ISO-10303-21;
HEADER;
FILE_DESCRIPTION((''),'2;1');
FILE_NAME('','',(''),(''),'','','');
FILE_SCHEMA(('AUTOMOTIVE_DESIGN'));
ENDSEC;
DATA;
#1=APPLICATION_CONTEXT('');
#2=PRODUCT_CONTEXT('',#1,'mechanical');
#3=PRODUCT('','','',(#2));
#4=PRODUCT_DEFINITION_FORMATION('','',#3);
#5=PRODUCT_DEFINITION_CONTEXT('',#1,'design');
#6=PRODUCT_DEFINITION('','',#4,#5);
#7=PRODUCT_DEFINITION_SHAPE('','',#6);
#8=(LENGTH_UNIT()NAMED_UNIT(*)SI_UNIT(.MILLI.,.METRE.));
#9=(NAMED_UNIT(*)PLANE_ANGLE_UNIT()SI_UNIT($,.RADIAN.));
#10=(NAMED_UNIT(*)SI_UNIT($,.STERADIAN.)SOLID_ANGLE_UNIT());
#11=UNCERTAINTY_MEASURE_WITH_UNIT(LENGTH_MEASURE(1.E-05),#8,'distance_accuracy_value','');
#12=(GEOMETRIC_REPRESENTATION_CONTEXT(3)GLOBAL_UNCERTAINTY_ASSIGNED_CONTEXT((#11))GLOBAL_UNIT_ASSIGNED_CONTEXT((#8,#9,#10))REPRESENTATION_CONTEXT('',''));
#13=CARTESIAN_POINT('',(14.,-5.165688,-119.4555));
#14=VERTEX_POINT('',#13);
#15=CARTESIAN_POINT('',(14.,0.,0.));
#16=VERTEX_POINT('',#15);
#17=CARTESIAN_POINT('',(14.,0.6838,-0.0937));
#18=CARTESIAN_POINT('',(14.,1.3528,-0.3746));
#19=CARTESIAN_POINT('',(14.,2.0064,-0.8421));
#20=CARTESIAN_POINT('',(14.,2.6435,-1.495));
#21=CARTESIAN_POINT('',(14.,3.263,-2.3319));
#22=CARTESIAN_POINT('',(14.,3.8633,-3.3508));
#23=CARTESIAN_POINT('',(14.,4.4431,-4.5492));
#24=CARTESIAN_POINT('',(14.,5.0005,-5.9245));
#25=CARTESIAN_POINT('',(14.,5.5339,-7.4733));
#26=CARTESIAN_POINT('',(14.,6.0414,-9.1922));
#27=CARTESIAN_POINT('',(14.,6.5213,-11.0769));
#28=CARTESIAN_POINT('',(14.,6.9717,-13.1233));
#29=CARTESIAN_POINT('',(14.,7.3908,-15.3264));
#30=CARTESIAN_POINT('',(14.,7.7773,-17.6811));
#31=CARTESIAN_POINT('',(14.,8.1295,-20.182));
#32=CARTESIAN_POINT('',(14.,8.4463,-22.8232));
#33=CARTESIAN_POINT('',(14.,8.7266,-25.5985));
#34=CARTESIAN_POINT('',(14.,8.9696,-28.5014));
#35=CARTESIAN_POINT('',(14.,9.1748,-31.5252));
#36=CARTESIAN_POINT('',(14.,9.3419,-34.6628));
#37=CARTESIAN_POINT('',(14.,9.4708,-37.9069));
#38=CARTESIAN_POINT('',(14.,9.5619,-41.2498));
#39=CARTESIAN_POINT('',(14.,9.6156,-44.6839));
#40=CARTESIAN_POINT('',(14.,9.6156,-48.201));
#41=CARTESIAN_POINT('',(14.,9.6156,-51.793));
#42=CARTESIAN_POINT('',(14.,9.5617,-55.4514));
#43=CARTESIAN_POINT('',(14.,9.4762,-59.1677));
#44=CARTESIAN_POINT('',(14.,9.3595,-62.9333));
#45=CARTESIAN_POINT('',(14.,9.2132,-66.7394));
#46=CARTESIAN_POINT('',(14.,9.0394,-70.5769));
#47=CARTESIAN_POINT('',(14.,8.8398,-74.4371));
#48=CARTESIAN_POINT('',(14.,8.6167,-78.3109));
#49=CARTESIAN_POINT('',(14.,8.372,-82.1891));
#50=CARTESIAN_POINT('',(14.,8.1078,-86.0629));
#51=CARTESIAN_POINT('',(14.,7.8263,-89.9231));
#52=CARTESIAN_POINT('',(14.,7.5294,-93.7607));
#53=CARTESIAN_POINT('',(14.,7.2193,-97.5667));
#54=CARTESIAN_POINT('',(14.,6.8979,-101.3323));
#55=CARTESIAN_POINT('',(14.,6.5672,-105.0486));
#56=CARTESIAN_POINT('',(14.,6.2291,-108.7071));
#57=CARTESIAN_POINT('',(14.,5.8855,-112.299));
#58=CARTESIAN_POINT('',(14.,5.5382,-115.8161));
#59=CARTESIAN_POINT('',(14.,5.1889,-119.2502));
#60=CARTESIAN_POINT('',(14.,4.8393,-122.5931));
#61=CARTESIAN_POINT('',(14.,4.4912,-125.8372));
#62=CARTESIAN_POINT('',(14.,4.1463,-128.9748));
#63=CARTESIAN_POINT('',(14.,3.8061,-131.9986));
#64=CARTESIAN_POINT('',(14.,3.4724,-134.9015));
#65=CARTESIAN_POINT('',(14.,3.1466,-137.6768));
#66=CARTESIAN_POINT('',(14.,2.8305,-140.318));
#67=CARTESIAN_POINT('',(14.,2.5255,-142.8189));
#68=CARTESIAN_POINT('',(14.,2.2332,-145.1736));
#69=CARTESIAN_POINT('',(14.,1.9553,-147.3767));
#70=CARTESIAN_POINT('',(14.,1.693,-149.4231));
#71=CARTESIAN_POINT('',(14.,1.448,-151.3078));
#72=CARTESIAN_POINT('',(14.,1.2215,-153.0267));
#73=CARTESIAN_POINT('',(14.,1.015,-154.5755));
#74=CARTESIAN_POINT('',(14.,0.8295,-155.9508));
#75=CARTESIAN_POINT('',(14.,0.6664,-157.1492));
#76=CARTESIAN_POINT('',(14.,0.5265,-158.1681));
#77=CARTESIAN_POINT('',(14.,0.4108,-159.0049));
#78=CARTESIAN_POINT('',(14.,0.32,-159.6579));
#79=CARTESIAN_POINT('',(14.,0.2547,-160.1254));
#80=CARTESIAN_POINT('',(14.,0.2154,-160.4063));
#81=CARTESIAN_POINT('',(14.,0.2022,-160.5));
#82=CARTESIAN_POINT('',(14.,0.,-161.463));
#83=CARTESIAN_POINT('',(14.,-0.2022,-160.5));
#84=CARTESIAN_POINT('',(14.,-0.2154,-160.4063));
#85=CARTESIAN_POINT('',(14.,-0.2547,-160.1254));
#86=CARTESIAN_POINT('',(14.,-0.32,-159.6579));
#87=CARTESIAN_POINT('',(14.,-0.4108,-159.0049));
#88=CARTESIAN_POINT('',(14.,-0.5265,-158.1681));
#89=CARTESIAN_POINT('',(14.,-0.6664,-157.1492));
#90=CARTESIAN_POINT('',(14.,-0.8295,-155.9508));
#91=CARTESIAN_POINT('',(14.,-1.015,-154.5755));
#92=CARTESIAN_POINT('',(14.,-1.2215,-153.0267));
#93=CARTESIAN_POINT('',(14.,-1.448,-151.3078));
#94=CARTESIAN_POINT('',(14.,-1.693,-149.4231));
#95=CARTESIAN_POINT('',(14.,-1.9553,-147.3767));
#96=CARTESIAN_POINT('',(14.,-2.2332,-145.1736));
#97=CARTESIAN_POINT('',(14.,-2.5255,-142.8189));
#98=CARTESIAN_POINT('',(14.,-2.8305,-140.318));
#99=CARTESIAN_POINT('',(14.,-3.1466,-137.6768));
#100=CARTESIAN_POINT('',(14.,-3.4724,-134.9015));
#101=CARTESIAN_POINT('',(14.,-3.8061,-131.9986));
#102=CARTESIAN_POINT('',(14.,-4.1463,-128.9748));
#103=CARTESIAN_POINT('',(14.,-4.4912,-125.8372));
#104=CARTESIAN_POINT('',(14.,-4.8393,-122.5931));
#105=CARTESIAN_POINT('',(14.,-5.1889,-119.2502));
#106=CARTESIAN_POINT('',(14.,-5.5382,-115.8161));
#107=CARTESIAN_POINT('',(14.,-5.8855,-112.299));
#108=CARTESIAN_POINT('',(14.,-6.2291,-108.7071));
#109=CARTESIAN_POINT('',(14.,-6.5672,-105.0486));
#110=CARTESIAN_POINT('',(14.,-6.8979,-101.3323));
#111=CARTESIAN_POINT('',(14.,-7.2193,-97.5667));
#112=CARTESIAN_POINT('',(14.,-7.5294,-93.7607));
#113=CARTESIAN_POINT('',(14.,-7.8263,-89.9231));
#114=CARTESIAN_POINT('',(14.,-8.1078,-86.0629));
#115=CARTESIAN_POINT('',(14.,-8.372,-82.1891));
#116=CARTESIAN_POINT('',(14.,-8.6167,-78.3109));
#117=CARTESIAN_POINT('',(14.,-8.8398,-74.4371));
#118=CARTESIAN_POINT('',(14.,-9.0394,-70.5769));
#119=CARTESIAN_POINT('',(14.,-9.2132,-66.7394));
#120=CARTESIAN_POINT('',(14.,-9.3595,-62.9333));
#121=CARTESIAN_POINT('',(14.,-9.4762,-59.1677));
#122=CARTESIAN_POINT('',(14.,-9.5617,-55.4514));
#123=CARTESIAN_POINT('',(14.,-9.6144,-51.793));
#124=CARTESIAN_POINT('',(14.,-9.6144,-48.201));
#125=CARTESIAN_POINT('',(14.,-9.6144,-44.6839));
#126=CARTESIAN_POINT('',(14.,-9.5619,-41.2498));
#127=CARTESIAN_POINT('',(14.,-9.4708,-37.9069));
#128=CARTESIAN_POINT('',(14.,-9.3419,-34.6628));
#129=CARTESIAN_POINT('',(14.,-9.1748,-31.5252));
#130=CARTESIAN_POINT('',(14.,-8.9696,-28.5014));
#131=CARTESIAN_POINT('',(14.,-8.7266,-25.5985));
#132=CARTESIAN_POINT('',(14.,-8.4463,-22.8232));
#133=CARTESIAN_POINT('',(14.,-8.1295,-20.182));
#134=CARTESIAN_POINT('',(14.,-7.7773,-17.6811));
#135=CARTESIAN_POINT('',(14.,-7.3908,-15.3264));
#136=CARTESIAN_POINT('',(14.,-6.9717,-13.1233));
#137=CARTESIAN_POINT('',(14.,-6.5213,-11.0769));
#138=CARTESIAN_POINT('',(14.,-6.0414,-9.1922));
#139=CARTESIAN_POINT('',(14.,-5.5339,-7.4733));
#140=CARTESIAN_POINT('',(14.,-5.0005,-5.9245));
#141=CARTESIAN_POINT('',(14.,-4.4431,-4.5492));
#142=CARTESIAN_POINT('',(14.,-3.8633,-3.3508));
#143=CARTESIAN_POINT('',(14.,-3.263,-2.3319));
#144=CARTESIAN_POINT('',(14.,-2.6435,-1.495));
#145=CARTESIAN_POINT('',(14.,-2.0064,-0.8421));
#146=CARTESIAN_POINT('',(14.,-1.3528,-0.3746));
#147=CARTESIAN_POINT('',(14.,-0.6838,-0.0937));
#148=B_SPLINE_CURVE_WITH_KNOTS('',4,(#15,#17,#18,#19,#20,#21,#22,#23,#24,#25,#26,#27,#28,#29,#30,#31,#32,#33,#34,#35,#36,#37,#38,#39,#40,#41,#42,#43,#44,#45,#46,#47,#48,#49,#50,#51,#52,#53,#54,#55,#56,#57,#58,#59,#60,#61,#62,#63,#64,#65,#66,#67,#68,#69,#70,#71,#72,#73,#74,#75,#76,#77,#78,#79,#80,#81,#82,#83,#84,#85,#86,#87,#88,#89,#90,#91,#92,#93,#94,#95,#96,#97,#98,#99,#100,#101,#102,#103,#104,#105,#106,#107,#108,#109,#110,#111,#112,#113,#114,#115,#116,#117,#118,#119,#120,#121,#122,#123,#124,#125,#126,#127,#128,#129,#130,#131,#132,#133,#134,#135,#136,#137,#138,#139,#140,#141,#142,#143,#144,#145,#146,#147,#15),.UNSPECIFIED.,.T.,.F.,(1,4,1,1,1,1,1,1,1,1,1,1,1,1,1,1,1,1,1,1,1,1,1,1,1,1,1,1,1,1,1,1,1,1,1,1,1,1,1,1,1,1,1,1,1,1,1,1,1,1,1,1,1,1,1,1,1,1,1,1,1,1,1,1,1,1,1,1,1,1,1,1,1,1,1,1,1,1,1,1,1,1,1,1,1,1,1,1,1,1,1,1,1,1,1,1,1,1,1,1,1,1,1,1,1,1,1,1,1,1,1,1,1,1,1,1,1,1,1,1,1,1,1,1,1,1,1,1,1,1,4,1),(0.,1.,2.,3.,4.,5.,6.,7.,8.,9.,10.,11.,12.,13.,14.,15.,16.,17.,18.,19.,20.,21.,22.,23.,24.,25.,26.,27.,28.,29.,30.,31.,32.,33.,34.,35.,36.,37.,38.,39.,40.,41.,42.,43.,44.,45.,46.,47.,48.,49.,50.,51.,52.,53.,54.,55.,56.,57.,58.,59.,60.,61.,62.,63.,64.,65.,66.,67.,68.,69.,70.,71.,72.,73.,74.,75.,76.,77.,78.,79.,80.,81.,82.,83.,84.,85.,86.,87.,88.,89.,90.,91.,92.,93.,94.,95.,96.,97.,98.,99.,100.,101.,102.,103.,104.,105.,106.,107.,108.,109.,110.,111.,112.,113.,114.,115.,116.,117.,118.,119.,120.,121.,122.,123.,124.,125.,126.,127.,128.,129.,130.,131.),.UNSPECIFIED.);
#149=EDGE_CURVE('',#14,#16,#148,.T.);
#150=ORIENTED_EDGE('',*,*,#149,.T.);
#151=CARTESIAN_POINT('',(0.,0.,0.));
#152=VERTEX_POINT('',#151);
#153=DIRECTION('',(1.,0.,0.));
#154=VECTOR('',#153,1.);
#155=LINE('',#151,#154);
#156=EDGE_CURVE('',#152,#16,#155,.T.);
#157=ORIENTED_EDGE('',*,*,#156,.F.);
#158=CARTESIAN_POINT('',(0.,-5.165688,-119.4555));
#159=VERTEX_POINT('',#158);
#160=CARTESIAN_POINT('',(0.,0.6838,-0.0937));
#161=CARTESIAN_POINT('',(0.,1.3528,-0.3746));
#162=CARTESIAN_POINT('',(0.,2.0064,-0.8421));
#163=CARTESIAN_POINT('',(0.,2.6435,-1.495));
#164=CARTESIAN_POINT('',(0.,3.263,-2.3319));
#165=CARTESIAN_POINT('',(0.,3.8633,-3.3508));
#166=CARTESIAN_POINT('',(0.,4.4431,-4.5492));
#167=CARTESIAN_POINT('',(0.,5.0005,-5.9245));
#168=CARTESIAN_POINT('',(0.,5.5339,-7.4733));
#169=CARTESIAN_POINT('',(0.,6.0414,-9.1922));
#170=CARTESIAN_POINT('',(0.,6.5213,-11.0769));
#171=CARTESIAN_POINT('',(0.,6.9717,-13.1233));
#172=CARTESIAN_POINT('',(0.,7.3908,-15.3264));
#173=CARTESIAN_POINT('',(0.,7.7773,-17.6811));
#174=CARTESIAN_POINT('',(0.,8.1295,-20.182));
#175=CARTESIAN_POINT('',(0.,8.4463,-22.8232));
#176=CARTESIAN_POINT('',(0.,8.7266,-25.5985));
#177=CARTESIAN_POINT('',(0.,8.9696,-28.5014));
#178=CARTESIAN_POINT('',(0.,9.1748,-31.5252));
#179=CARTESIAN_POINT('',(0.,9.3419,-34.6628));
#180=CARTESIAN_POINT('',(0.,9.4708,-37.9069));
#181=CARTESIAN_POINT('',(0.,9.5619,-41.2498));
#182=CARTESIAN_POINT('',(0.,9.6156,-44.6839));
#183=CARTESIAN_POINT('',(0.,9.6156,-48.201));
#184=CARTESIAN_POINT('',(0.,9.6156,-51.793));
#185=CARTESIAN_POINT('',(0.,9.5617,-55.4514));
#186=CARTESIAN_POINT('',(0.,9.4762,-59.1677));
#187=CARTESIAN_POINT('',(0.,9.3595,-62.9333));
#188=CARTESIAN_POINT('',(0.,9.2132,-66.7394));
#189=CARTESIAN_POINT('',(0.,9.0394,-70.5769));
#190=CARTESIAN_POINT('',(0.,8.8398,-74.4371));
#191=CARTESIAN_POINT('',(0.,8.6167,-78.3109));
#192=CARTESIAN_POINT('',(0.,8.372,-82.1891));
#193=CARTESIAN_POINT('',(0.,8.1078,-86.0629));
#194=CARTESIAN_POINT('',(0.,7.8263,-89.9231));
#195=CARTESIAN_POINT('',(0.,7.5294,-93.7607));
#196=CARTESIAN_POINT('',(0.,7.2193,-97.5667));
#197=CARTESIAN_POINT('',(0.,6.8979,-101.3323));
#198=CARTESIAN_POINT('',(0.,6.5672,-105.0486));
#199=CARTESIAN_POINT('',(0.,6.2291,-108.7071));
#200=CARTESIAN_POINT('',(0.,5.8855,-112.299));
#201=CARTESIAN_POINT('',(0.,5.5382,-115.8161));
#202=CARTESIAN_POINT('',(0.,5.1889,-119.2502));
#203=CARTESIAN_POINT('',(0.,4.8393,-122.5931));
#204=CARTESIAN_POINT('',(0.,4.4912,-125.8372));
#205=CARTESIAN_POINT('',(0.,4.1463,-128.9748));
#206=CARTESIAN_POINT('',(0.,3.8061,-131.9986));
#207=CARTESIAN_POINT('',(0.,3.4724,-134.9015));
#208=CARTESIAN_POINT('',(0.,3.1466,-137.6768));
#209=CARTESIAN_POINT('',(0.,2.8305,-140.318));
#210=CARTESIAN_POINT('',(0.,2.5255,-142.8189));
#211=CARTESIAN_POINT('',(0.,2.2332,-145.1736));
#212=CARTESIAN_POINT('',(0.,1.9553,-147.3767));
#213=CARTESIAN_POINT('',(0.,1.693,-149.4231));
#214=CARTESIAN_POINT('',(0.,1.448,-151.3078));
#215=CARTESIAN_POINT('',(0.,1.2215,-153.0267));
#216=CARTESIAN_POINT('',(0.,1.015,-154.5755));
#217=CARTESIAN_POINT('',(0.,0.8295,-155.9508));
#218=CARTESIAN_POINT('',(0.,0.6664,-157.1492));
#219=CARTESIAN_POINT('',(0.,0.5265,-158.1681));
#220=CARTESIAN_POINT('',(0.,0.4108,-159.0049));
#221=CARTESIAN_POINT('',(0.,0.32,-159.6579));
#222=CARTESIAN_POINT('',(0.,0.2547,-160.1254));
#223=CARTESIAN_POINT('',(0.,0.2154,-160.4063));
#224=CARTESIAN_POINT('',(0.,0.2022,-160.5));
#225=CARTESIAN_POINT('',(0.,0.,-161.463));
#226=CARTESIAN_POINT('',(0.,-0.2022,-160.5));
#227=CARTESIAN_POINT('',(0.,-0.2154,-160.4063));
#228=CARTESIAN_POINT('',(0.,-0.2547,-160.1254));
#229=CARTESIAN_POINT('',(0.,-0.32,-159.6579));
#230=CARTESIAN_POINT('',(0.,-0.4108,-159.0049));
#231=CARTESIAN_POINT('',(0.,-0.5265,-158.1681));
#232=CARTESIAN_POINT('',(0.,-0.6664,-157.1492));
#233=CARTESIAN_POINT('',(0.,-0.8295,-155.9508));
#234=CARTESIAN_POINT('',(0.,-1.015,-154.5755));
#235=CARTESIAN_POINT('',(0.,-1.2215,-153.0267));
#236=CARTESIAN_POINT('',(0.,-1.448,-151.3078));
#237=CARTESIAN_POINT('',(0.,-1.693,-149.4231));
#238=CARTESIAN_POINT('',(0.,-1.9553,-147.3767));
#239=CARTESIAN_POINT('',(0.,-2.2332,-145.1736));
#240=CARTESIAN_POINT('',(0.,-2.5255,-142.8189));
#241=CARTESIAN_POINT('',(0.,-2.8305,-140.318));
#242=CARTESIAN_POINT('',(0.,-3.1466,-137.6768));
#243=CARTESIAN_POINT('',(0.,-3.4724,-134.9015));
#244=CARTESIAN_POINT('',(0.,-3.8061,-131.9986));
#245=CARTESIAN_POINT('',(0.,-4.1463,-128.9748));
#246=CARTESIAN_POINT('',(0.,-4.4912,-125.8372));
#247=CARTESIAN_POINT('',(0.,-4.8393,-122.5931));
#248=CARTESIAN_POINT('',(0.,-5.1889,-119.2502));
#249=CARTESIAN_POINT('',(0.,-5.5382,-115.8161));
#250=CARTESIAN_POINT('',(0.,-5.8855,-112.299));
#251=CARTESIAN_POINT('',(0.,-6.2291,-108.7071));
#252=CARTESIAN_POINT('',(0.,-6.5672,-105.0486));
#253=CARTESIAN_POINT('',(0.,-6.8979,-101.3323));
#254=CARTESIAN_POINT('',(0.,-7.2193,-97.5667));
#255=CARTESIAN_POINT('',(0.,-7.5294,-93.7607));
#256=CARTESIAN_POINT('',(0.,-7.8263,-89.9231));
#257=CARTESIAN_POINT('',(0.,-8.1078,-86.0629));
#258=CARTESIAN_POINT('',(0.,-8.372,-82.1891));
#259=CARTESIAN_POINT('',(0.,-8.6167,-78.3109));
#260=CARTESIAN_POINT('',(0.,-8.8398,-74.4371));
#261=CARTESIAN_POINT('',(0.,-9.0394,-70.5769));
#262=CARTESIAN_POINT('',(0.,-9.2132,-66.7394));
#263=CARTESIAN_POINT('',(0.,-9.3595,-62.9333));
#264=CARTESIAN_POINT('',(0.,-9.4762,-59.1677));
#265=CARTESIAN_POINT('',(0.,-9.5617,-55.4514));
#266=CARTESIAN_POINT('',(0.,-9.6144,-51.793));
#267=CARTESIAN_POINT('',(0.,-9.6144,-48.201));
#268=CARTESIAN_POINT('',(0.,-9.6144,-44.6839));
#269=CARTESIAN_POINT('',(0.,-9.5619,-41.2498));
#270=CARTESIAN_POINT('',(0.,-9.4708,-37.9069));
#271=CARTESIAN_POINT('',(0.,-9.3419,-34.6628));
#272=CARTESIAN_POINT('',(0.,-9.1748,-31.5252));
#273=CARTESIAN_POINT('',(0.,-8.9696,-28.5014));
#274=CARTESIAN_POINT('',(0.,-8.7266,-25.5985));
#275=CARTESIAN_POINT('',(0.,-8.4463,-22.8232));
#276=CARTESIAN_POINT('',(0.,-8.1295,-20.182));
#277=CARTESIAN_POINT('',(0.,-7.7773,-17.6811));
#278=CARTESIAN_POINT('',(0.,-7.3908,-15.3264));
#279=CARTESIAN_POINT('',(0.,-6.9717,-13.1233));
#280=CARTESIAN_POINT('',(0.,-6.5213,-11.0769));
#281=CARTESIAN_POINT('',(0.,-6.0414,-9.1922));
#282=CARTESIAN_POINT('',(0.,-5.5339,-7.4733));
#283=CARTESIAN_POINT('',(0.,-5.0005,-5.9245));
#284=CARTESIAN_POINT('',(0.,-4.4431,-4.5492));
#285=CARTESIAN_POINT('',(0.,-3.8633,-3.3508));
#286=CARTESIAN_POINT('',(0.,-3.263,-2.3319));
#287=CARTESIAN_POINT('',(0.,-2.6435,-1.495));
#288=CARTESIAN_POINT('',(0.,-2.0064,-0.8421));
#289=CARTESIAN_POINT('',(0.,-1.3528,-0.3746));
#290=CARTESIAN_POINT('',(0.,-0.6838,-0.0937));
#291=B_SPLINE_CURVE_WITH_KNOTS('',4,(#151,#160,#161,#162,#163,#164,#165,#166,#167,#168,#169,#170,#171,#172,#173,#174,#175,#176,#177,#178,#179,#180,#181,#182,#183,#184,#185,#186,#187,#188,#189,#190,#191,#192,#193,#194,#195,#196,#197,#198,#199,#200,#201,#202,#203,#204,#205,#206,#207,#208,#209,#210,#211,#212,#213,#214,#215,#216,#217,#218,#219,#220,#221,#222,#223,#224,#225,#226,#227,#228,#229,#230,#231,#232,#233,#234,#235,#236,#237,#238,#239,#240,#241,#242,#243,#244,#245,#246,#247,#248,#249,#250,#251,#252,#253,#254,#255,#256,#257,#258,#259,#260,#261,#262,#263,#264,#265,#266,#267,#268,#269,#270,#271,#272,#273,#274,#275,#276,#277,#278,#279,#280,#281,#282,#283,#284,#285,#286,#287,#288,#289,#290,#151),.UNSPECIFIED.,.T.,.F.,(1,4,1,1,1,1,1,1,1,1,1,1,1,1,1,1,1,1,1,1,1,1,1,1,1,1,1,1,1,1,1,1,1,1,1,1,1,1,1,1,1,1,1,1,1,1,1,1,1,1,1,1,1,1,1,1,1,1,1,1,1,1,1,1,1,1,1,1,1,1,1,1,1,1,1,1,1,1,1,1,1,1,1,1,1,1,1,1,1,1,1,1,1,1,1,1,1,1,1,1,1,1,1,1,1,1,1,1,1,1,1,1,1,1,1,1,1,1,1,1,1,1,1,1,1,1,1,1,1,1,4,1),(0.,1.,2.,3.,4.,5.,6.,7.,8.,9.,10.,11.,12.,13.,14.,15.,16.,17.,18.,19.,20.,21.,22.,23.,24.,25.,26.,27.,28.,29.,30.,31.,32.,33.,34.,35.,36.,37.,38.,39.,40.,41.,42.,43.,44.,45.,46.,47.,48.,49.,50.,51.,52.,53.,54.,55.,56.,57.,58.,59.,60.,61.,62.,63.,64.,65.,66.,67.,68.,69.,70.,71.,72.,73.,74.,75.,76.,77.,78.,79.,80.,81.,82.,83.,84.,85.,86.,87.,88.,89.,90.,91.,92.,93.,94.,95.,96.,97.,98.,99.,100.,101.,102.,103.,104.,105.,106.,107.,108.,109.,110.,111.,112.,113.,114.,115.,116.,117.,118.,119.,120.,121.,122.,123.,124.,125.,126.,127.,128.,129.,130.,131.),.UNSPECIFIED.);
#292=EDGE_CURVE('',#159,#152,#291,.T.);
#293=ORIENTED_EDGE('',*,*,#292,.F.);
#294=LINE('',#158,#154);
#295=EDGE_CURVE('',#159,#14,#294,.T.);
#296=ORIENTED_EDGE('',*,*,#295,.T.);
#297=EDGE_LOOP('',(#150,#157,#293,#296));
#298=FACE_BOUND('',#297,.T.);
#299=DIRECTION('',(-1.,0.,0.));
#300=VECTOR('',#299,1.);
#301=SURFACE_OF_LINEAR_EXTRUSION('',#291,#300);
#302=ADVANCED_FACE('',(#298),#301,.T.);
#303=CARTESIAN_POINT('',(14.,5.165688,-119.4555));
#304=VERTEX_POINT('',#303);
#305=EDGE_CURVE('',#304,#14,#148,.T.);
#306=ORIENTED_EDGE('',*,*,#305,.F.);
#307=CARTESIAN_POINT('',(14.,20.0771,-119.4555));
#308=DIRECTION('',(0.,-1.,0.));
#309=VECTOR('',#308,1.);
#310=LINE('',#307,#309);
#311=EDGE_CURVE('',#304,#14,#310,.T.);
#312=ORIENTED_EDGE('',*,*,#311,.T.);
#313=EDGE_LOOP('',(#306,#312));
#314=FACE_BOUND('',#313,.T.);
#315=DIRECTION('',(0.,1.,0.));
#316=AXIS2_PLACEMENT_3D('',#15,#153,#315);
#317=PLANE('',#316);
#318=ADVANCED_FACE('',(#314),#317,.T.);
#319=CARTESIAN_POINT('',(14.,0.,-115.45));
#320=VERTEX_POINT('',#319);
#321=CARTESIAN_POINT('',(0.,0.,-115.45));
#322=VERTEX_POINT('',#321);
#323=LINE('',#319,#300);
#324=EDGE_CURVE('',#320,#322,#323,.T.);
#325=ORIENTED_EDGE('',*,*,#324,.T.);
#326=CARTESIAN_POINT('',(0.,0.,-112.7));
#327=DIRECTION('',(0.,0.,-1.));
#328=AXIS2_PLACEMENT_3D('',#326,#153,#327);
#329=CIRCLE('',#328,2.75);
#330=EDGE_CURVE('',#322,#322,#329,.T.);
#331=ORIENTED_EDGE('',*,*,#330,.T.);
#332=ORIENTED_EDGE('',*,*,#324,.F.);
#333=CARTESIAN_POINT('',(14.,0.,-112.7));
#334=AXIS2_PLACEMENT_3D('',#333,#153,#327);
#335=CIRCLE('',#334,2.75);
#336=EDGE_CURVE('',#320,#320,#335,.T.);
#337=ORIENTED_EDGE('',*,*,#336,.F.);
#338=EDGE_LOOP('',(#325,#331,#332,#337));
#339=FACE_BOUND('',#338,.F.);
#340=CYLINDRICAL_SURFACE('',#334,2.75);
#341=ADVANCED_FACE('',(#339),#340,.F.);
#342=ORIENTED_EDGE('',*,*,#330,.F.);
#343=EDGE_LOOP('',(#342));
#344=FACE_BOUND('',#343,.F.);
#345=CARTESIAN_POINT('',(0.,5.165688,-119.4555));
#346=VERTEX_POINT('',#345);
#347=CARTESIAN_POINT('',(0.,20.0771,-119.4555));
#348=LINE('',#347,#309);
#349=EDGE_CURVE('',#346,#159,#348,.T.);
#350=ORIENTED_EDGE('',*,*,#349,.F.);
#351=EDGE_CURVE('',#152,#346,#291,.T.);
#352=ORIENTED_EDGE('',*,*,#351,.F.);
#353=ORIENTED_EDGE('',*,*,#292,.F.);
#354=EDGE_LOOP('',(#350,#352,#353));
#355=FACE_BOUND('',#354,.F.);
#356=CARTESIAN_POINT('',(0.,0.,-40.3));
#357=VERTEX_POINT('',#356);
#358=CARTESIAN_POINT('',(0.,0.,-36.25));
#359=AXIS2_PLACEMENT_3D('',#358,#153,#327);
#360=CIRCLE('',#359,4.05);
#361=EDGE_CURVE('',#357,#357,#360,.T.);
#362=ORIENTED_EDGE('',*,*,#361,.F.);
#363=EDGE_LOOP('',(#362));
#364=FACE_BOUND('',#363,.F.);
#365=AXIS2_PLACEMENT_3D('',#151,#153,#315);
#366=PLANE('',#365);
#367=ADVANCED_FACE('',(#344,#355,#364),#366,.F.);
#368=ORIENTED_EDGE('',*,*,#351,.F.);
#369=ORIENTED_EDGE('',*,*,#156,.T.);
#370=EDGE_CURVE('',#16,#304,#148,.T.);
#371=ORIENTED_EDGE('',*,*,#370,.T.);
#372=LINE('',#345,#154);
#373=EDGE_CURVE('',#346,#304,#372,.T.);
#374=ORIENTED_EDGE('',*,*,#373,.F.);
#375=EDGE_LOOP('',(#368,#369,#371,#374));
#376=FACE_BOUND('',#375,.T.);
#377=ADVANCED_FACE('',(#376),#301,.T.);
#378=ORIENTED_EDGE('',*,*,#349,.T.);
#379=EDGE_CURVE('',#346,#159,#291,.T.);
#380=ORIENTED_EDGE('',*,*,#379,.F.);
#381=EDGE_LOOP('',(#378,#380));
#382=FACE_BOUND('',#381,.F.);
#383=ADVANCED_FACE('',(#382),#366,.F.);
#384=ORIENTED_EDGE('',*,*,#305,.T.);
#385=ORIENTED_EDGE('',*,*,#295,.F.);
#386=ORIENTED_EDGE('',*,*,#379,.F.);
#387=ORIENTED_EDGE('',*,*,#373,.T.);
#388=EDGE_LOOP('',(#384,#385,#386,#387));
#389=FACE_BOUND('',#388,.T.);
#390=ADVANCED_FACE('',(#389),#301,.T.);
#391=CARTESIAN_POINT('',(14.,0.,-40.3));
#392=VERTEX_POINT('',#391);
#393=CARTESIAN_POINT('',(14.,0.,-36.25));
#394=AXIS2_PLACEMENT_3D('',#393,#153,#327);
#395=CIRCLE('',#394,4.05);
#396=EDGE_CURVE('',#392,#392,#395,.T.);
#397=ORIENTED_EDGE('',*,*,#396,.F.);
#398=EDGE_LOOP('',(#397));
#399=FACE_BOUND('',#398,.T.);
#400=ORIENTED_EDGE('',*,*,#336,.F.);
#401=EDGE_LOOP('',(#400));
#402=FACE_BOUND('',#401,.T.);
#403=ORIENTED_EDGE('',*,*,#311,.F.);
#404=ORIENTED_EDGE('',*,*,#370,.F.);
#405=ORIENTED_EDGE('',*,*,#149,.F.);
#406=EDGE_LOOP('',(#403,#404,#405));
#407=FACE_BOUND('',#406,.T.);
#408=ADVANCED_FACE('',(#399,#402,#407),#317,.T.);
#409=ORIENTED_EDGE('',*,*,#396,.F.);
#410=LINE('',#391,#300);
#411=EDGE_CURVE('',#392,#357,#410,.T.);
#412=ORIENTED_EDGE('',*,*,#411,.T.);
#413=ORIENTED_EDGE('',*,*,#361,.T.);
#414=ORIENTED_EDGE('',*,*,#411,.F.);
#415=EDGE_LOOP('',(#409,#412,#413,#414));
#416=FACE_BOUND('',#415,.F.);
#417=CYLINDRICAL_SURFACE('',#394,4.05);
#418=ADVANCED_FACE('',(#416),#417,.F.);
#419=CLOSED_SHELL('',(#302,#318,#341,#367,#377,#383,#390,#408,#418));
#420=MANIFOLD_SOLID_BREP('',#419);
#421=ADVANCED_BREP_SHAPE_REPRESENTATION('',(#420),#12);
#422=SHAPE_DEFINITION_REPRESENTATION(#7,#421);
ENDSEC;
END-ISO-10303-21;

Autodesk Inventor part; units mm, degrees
ref_plane "YZ Plane" through (0, 0, 0) normal (1, 0, 0) x (0, 1, 0)
ref_plane "XZ Plane" through (0, 0, 0) normal (0, 1, 0) x (-1, 0, 0)
ref_plane "XY Plane" through (0, 0, 0) normal (0, 0, 1) x (1, 0, 0)
sketch "Sketch9" plane through (0, 0, 0) normal (1, 0, 0) x (0, 1, 0)
  line L0 (0, 0) -> (0.6838, -0.0937) construction
  line L1 (0.6838, -0.0937) -> (1.3528, -0.3746) construction
  line L2 (1.3528, -0.3746) -> (2.0064, -0.8421) construction
  line L3 (2.0064, -0.8421) -> (2.6435, -1.495) construction
  line L4 (2.6435, -1.495) -> (3.263, -2.3319) construction
  line L5 (3.263, -2.3319) -> (3.8633, -3.3508) construction
  line L6 (3.8633, -3.3508) -> (4.4431, -4.5492) construction
  line L7 (4.4431, -4.5492) -> (5.0005, -5.9245) construction
  line L8 (5.0005, -5.9245) -> (5.5339, -7.4733) construction
  line L9 (5.5339, -7.4733) -> (6.0414, -9.1922) construction
  line L10 (6.0414, -9.1922) -> (6.5213, -11.0769) construction
  line L11 (6.5213, -11.0769) -> (6.9717, -13.1233) construction
  line L12 (6.9717, -13.1233) -> (7.3908, -15.3264) construction
  line L13 (7.3908, -15.3264) -> (7.7773, -17.6811) construction
  line L14 (7.7773, -17.6811) -> (8.1295, -20.182) construction
  line L15 (8.1295, -20.182) -> (8.4463, -22.8232) construction
  line L16 (8.4463, -22.8232) -> (8.7266, -25.5985) construction
  line L17 (8.7266, -25.5985) -> (8.9696, -28.5014) construction
  line L18 (8.9696, -28.5014) -> (9.1748, -31.5252) construction
  line L19 (9.1748, -31.5252) -> (9.3419, -34.6628) construction
  line L20 (9.3419, -34.6628) -> (9.4708, -37.9069) construction
  line L21 (9.4708, -37.9069) -> (9.5619, -41.2498) construction
  line L22 (9.5619, -41.2498) -> (9.6156, -44.6839) construction
  line L23 (9.6156, -44.6839) -> (9.6156, -48.201) construction
  line L24 (9.6156, -48.201) -> (9.6156, -51.793) construction
  line L25 (9.6156, -51.793) -> (9.5617, -55.4514) construction
  line L26 (9.5617, -55.4514) -> (9.4762, -59.1677) construction
  line L27 (9.4762, -59.1677) -> (9.3595, -62.9333) construction
  line L28 (9.3595, -62.9333) -> (9.2132, -66.7394) construction
  line L29 (9.2132, -66.7394) -> (9.0394, -70.5769) construction
  line L30 (9.0394, -70.5769) -> (8.8398, -74.4371) construction
  line L31 (8.8398, -74.4371) -> (8.6167, -78.3109) construction
  line L32 (8.6167, -78.3109) -> (8.372, -82.1891) construction
  line L33 (8.372, -82.1891) -> (8.1078, -86.0629) construction
  line L34 (8.1078, -86.0629) -> (7.8263, -89.9231) construction
  line L35 (7.8263, -89.9231) -> (7.5294, -93.7607) construction
  line L36 (7.5294, -93.7607) -> (7.2193, -97.5667) construction
  line L37 (7.2193, -97.5667) -> (6.8979, -101.3323) construction
  line L38 (6.8979, -101.3323) -> (6.5672, -105.0486) construction
  line L39 (6.5672, -105.0486) -> (6.2291, -108.7071) construction
  line L40 (6.2291, -108.7071) -> (5.8855, -112.299) construction
  line L41 (5.8855, -112.299) -> (5.5382, -115.8161) construction
  line L42 (5.5382, -115.8161) -> (5.1889, -119.2502) construction
  line L43 (5.1889, -119.2502) -> (4.8393, -122.5931) construction
  line L44 (4.8393, -122.5931) -> (4.4912, -125.8372) construction
  line L45 (4.4912, -125.8372) -> (4.1463, -128.9748) construction
  line L46 (4.1463, -128.9748) -> (3.8061, -131.9986) construction
  line L47 (3.8061, -131.9986) -> (3.4724, -134.9015) construction
  line L48 (3.4724, -134.9015) -> (3.1466, -137.6768) construction
  line L49 (3.1466, -137.6768) -> (2.8305, -140.318) construction
  line L50 (2.8305, -140.318) -> (2.5255, -142.8189) construction
  line L51 (2.5255, -142.8189) -> (2.2332, -145.1736) construction
  line L52 (2.2332, -145.1736) -> (1.9553, -147.3767) construction
  line L53 (1.9553, -147.3767) -> (1.693, -149.4231) construction
  line L54 (1.693, -149.4231) -> (1.448, -151.3078) construction
  line L55 (1.448, -151.3078) -> (1.2215, -153.0267) construction
  line L56 (1.2215, -153.0267) -> (1.015, -154.5755) construction
  line L57 (1.015, -154.5755) -> (0.8295, -155.9508) construction
  line L58 (0.8295, -155.9508) -> (0.6664, -157.1492) construction
  line L59 (0.6664, -157.1492) -> (0.5265, -158.1681) construction
  line L60 (0.5265, -158.1681) -> (0.4108, -159.0049) construction
  line L61 (0.4108, -159.0049) -> (0.32, -159.6579) construction
  line L62 (0.32, -159.6579) -> (0.2547, -160.1254) construction
  line L63 (0.2547, -160.1254) -> (0.2154, -160.4063) construction
  line L64 (0.2154, -160.4063) -> (0.2022, -160.5) construction
  line L65 (0.2022, -160.5) -> (0, -161.463) construction
  line L66 (0, -161.463) -> (-0.2022, -160.5) construction
  line L67 (-0.2022, -160.5) -> (-0.2154, -160.4063) construction
  line L68 (-0.2154, -160.4063) -> (-0.2547, -160.1254) construction
  line L69 (-0.2547, -160.1254) -> (-0.32, -159.6579) construction
  line L70 (-0.32, -159.6579) -> (-0.4108, -159.0049) construction
  line L71 (-0.4108, -159.0049) -> (-0.5265, -158.1681) construction
  line L72 (-0.5265, -158.1681) -> (-0.6664, -157.1492) construction
  line L73 (-0.6664, -157.1492) -> (-0.8295, -155.9508) construction
  line L74 (-0.8295, -155.9508) -> (-1.015, -154.5755) construction
  line L75 (-1.015, -154.5755) -> (-1.2215, -153.0267) construction
  line L76 (-1.2215, -153.0267) -> (-1.448, -151.3078) construction
  line L77 (-1.448, -151.3078) -> (-1.693, -149.4231) construction
  line L78 (-1.693, -149.4231) -> (-1.9553, -147.3767) construction
  line L79 (-1.9553, -147.3767) -> (-2.2332, -145.1736) construction
  line L80 (-2.2332, -145.1736) -> (-2.5255, -142.8189) construction
  line L81 (-2.5255, -142.8189) -> (-2.8305, -140.318) construction
  line L82 (-2.8305, -140.318) -> (-3.1466, -137.6768) construction
  line L83 (-3.1466, -137.6768) -> (-3.4724, -134.9015) construction
  line L84 (-3.4724, -134.9015) -> (-3.8061, -131.9986) construction
  line L85 (-3.8061, -131.9986) -> (-4.1463, -128.9748) construction
  line L86 (-4.1463, -128.9748) -> (-4.4912, -125.8372) construction
  line L87 (-4.4912, -125.8372) -> (-4.8393, -122.5931) construction
  line L88 (-4.8393, -122.5931) -> (-5.1889, -119.2502) construction
  line L89 (-5.1889, -119.2502) -> (-5.5382, -115.8161) construction
  line L90 (-5.5382, -115.8161) -> (-5.8855, -112.299) construction
  line L91 (-5.8855, -112.299) -> (-6.2291, -108.7071) construction
  line L92 (-6.2291, -108.7071) -> (-6.5672, -105.0486) construction
  line L93 (-6.5672, -105.0486) -> (-6.8979, -101.3323) construction
  line L94 (-6.8979, -101.3323) -> (-7.2193, -97.5667) construction
  line L95 (-7.2193, -97.5667) -> (-7.5294, -93.7607) construction
  line L96 (-7.5294, -93.7607) -> (-7.8263, -89.9231) construction
  line L97 (-7.8263, -89.9231) -> (-8.1078, -86.0629) construction
  line L98 (-8.1078, -86.0629) -> (-8.372, -82.1891) construction
  line L99 (-8.372, -82.1891) -> (-8.6167, -78.3109) construction
  line L100 (-8.6167, -78.3109) -> (-8.8398, -74.4371) construction
  line L101 (-8.8398, -74.4371) -> (-9.0394, -70.5769) construction
  line L102 (-9.0394, -70.5769) -> (-9.2132, -66.7394) construction
  line L103 (-9.2132, -66.7394) -> (-9.3595, -62.9333) construction
  line L104 (-9.3595, -62.9333) -> (-9.4762, -59.1677) construction
  line L105 (-9.4762, -59.1677) -> (-9.5617, -55.4514) construction
  line L106 (-9.5617, -55.4514) -> (-9.6144, -51.793) construction
  line L107 (-9.6144, -51.793) -> (-9.6144, -48.201) construction
  line L108 (-9.6144, -48.201) -> (-9.6144, -44.6839) construction
  line L109 (-9.6144, -44.6839) -> (-9.5619, -41.2498) construction
  line L110 (-9.5619, -41.2498) -> (-9.4708, -37.9069) construction
  line L111 (-9.4708, -37.9069) -> (-9.3419, -34.6628) construction
  line L112 (-9.3419, -34.6628) -> (-9.1748, -31.5252) construction
  line L113 (-9.1748, -31.5252) -> (-8.9696, -28.5014) construction
  line L114 (-8.9696, -28.5014) -> (-8.7266, -25.5985) construction
  line L115 (-8.7266, -25.5985) -> (-8.4463, -22.8232) construction
  line L116 (-8.4463, -22.8232) -> (-8.1295, -20.182) construction
  line L117 (-8.1295, -20.182) -> (-7.7773, -17.6811) construction
  line L118 (-7.7773, -17.6811) -> (-7.3908, -15.3264) construction
  line L119 (-7.3908, -15.3264) -> (-6.9717, -13.1233) construction
  line L120 (-6.9717, -13.1233) -> (-6.5213, -11.0769) construction
  line L121 (-6.5213, -11.0769) -> (-6.0414, -9.1922) construction
  line L122 (-6.0414, -9.1922) -> (-5.5339, -7.4733) construction
  line L123 (-5.5339, -7.4733) -> (-5.0005, -5.9245) construction
  line L124 (-5.0005, -5.9245) -> (-4.4431, -4.5492) construction
  line L125 (-4.4431, -4.5492) -> (-3.8633, -3.3508) construction
  line L126 (-3.8633, -3.3508) -> (-3.263, -2.3319) construction
  line L127 (-3.263, -2.3319) -> (-2.6435, -1.495) construction
  line L128 (-2.6435, -1.495) -> (-2.0064, -0.8421) construction
  line L129 (-2.0064, -0.8421) -> (-1.3528, -0.3746) construction
  line L130 (-1.3528, -0.3746) -> (-0.6838, -0.0937) construction
  line L131 (-0.6838, -0.0937) -> (0, 0) construction
  spline S0 degree 4 poles (0, 0) (0.6838, -0.0937) (1.3528, -0.3746) (2.0064, -0.8421) (2.6435, -1.495) (3.263, -2.3319) (3.8633, -3.3508) (4.4431, -4.5492) (5.0005, -5.9245) (5.5339, -7.4733) (6.0414, -9.1922) (6.5213, -11.0769) (6.9717, -13.1233) (7.3908, -15.3264) (7.7773, -17.6811) (8.1295, -20.182) (8.4463, -22.8232) (8.7266, -25.5985) (8.9696, -28.5014) (9.1748, -31.5252) (9.3419, -34.6628) (9.4708, -37.9069) (9.5619, -41.2498) (9.6156, -44.6839) (9.6156, -48.201) (9.6156, -51.793) (9.5617, -55.4514) (9.4762, -59.1677) (9.3595, -62.9333) (9.2132, -66.7394) (9.0394, -70.5769) (8.8398, -74.4371) (8.6167, -78.3109) (8.372, -82.1891) (8.1078, -86.0629) (7.8263, -89.9231) (7.5294, -93.7607) (7.2193, -97.5667) (6.8979, -101.3323) (6.5672, -105.0486) (6.2291, -108.7071) (5.8855, -112.299) (5.5382, -115.8161) (5.1889, -119.2502) (4.8393, -122.5931) (4.4912, -125.8372) (4.1463, -128.9748) (3.8061, -131.9986) (3.4724, -134.9015) (3.1466, -137.6768) (2.8305, -140.318) (2.5255, -142.8189) (2.2332, -145.1736) (1.9553, -147.3767) (1.693, -149.4231) (1.448, -151.3078) (1.2215, -153.0267) (1.015, -154.5755) (0.8295, -155.9508) (0.6664, -157.1492) (0.5265, -158.1681) (0.4108, -159.0049) (0.32, -159.6579) (0.2547, -160.1254) (0.2154, -160.4063) (0.2022, -160.5) (0, -161.463) (-0.2022, -160.5) (-0.2154, -160.4063) (-0.2547, -160.1254) (-0.32, -159.6579) (-0.4108, -159.0049) (-0.5265, -158.1681) (-0.6664, -157.1492) (-0.8295, -155.9508) (-1.015, -154.5755) (-1.2215, -153.0267) (-1.448, -151.3078) (-1.693, -149.4231) (-1.9553, -147.3767) (-2.2332, -145.1736) (-2.5255, -142.8189) (-2.8305, -140.318) (-3.1466, -137.6768) (-3.4724, -134.9015) (-3.8061, -131.9986) (-4.1463, -128.9748) (-4.4912, -125.8372) (-4.8393, -122.5931) (-5.1889, -119.2502) (-5.5382, -115.8161) (-5.8855, -112.299) (-6.2291, -108.7071) (-6.5672, -105.0486) (-6.8979, -101.3323) (-7.2193, -97.5667) (-7.5294, -93.7607) (-7.8263, -89.9231) (-8.1078, -86.0629) (-8.372, -82.1891) (-8.6167, -78.3109) (-8.8398, -74.4371) (-9.0394, -70.5769) (-9.2132, -66.7394) (-9.3595, -62.9333) (-9.4762, -59.1677) (-9.5617, -55.4514) (-9.6144, -51.793) (-9.6144, -48.201) (-9.6144, -44.6839) (-9.5619, -41.2498) (-9.4708, -37.9069) (-9.3419, -34.6628) (-9.1748, -31.5252) (-8.9696, -28.5014) (-8.7266, -25.5985) (-8.4463, -22.8232) (-8.1295, -20.182) (-7.7773, -17.6811) (-7.3908, -15.3264) (-6.9717, -13.1233) (-6.5213, -11.0769) (-6.0414, -9.1922) (-5.5339, -7.4733) (-5.0005, -5.9245) (-4.4431, -4.5492) (-3.8633, -3.3508) (-3.263, -2.3319) (-2.6435, -1.495) (-2.0064, -0.8421) (-1.3528, -0.3746) (-0.6838, -0.0937) (0, 0) knots 1 1 1 1 1 2 3 4 5 6 7 8 9 10 11 12 13 14 15 16 17 18 19 20 21 22 23 24 25 26 27 28 29 30 31 32 33 34 35 36 37 38 39 40 41 42 43 44 45 46 47 48 49 50 51 52 53 54 55 56 57 58 59 60 61 62 63 64 65 66 67 68 69 70 71 72 73 74 75 76 77 78 79 80 81 82 83 84 85 86 87 88 89 90 91 92 93 94 95 96 97 98 99 100 101 102 103 104 105 106 107 108 109 110 111 112 113 114 115 116 117 118 119 120 121 122 123 124 125 126 127 128 129 130 130 130 130 130
  line L132 (20.0771, -119.4555) -> (-24.676, -119.4555)
  dimension "d95" = 119.4555
extrude "Extrusion3" add sketch "Sketch9" along normal blind 14
sketch "Sketch10" plane through (14, 0, 0) normal (1, 0, 0) x (0, 0, -1)
  circle A0 centre (112.7, 0) radius 2.75
  circle A1 centre (36.25, 0) radius 4.05
  point P0 (0, 0)
  dimension "d87" = 5.5
  dimension "d88" = 8.1
  dimension "d89" = 36.25
  dimension "d90" = 112.7
extrude "Extrusion4" cut sketch "Sketch10" against normal blind 15
properties part number "6P-004" material "Poplar"
